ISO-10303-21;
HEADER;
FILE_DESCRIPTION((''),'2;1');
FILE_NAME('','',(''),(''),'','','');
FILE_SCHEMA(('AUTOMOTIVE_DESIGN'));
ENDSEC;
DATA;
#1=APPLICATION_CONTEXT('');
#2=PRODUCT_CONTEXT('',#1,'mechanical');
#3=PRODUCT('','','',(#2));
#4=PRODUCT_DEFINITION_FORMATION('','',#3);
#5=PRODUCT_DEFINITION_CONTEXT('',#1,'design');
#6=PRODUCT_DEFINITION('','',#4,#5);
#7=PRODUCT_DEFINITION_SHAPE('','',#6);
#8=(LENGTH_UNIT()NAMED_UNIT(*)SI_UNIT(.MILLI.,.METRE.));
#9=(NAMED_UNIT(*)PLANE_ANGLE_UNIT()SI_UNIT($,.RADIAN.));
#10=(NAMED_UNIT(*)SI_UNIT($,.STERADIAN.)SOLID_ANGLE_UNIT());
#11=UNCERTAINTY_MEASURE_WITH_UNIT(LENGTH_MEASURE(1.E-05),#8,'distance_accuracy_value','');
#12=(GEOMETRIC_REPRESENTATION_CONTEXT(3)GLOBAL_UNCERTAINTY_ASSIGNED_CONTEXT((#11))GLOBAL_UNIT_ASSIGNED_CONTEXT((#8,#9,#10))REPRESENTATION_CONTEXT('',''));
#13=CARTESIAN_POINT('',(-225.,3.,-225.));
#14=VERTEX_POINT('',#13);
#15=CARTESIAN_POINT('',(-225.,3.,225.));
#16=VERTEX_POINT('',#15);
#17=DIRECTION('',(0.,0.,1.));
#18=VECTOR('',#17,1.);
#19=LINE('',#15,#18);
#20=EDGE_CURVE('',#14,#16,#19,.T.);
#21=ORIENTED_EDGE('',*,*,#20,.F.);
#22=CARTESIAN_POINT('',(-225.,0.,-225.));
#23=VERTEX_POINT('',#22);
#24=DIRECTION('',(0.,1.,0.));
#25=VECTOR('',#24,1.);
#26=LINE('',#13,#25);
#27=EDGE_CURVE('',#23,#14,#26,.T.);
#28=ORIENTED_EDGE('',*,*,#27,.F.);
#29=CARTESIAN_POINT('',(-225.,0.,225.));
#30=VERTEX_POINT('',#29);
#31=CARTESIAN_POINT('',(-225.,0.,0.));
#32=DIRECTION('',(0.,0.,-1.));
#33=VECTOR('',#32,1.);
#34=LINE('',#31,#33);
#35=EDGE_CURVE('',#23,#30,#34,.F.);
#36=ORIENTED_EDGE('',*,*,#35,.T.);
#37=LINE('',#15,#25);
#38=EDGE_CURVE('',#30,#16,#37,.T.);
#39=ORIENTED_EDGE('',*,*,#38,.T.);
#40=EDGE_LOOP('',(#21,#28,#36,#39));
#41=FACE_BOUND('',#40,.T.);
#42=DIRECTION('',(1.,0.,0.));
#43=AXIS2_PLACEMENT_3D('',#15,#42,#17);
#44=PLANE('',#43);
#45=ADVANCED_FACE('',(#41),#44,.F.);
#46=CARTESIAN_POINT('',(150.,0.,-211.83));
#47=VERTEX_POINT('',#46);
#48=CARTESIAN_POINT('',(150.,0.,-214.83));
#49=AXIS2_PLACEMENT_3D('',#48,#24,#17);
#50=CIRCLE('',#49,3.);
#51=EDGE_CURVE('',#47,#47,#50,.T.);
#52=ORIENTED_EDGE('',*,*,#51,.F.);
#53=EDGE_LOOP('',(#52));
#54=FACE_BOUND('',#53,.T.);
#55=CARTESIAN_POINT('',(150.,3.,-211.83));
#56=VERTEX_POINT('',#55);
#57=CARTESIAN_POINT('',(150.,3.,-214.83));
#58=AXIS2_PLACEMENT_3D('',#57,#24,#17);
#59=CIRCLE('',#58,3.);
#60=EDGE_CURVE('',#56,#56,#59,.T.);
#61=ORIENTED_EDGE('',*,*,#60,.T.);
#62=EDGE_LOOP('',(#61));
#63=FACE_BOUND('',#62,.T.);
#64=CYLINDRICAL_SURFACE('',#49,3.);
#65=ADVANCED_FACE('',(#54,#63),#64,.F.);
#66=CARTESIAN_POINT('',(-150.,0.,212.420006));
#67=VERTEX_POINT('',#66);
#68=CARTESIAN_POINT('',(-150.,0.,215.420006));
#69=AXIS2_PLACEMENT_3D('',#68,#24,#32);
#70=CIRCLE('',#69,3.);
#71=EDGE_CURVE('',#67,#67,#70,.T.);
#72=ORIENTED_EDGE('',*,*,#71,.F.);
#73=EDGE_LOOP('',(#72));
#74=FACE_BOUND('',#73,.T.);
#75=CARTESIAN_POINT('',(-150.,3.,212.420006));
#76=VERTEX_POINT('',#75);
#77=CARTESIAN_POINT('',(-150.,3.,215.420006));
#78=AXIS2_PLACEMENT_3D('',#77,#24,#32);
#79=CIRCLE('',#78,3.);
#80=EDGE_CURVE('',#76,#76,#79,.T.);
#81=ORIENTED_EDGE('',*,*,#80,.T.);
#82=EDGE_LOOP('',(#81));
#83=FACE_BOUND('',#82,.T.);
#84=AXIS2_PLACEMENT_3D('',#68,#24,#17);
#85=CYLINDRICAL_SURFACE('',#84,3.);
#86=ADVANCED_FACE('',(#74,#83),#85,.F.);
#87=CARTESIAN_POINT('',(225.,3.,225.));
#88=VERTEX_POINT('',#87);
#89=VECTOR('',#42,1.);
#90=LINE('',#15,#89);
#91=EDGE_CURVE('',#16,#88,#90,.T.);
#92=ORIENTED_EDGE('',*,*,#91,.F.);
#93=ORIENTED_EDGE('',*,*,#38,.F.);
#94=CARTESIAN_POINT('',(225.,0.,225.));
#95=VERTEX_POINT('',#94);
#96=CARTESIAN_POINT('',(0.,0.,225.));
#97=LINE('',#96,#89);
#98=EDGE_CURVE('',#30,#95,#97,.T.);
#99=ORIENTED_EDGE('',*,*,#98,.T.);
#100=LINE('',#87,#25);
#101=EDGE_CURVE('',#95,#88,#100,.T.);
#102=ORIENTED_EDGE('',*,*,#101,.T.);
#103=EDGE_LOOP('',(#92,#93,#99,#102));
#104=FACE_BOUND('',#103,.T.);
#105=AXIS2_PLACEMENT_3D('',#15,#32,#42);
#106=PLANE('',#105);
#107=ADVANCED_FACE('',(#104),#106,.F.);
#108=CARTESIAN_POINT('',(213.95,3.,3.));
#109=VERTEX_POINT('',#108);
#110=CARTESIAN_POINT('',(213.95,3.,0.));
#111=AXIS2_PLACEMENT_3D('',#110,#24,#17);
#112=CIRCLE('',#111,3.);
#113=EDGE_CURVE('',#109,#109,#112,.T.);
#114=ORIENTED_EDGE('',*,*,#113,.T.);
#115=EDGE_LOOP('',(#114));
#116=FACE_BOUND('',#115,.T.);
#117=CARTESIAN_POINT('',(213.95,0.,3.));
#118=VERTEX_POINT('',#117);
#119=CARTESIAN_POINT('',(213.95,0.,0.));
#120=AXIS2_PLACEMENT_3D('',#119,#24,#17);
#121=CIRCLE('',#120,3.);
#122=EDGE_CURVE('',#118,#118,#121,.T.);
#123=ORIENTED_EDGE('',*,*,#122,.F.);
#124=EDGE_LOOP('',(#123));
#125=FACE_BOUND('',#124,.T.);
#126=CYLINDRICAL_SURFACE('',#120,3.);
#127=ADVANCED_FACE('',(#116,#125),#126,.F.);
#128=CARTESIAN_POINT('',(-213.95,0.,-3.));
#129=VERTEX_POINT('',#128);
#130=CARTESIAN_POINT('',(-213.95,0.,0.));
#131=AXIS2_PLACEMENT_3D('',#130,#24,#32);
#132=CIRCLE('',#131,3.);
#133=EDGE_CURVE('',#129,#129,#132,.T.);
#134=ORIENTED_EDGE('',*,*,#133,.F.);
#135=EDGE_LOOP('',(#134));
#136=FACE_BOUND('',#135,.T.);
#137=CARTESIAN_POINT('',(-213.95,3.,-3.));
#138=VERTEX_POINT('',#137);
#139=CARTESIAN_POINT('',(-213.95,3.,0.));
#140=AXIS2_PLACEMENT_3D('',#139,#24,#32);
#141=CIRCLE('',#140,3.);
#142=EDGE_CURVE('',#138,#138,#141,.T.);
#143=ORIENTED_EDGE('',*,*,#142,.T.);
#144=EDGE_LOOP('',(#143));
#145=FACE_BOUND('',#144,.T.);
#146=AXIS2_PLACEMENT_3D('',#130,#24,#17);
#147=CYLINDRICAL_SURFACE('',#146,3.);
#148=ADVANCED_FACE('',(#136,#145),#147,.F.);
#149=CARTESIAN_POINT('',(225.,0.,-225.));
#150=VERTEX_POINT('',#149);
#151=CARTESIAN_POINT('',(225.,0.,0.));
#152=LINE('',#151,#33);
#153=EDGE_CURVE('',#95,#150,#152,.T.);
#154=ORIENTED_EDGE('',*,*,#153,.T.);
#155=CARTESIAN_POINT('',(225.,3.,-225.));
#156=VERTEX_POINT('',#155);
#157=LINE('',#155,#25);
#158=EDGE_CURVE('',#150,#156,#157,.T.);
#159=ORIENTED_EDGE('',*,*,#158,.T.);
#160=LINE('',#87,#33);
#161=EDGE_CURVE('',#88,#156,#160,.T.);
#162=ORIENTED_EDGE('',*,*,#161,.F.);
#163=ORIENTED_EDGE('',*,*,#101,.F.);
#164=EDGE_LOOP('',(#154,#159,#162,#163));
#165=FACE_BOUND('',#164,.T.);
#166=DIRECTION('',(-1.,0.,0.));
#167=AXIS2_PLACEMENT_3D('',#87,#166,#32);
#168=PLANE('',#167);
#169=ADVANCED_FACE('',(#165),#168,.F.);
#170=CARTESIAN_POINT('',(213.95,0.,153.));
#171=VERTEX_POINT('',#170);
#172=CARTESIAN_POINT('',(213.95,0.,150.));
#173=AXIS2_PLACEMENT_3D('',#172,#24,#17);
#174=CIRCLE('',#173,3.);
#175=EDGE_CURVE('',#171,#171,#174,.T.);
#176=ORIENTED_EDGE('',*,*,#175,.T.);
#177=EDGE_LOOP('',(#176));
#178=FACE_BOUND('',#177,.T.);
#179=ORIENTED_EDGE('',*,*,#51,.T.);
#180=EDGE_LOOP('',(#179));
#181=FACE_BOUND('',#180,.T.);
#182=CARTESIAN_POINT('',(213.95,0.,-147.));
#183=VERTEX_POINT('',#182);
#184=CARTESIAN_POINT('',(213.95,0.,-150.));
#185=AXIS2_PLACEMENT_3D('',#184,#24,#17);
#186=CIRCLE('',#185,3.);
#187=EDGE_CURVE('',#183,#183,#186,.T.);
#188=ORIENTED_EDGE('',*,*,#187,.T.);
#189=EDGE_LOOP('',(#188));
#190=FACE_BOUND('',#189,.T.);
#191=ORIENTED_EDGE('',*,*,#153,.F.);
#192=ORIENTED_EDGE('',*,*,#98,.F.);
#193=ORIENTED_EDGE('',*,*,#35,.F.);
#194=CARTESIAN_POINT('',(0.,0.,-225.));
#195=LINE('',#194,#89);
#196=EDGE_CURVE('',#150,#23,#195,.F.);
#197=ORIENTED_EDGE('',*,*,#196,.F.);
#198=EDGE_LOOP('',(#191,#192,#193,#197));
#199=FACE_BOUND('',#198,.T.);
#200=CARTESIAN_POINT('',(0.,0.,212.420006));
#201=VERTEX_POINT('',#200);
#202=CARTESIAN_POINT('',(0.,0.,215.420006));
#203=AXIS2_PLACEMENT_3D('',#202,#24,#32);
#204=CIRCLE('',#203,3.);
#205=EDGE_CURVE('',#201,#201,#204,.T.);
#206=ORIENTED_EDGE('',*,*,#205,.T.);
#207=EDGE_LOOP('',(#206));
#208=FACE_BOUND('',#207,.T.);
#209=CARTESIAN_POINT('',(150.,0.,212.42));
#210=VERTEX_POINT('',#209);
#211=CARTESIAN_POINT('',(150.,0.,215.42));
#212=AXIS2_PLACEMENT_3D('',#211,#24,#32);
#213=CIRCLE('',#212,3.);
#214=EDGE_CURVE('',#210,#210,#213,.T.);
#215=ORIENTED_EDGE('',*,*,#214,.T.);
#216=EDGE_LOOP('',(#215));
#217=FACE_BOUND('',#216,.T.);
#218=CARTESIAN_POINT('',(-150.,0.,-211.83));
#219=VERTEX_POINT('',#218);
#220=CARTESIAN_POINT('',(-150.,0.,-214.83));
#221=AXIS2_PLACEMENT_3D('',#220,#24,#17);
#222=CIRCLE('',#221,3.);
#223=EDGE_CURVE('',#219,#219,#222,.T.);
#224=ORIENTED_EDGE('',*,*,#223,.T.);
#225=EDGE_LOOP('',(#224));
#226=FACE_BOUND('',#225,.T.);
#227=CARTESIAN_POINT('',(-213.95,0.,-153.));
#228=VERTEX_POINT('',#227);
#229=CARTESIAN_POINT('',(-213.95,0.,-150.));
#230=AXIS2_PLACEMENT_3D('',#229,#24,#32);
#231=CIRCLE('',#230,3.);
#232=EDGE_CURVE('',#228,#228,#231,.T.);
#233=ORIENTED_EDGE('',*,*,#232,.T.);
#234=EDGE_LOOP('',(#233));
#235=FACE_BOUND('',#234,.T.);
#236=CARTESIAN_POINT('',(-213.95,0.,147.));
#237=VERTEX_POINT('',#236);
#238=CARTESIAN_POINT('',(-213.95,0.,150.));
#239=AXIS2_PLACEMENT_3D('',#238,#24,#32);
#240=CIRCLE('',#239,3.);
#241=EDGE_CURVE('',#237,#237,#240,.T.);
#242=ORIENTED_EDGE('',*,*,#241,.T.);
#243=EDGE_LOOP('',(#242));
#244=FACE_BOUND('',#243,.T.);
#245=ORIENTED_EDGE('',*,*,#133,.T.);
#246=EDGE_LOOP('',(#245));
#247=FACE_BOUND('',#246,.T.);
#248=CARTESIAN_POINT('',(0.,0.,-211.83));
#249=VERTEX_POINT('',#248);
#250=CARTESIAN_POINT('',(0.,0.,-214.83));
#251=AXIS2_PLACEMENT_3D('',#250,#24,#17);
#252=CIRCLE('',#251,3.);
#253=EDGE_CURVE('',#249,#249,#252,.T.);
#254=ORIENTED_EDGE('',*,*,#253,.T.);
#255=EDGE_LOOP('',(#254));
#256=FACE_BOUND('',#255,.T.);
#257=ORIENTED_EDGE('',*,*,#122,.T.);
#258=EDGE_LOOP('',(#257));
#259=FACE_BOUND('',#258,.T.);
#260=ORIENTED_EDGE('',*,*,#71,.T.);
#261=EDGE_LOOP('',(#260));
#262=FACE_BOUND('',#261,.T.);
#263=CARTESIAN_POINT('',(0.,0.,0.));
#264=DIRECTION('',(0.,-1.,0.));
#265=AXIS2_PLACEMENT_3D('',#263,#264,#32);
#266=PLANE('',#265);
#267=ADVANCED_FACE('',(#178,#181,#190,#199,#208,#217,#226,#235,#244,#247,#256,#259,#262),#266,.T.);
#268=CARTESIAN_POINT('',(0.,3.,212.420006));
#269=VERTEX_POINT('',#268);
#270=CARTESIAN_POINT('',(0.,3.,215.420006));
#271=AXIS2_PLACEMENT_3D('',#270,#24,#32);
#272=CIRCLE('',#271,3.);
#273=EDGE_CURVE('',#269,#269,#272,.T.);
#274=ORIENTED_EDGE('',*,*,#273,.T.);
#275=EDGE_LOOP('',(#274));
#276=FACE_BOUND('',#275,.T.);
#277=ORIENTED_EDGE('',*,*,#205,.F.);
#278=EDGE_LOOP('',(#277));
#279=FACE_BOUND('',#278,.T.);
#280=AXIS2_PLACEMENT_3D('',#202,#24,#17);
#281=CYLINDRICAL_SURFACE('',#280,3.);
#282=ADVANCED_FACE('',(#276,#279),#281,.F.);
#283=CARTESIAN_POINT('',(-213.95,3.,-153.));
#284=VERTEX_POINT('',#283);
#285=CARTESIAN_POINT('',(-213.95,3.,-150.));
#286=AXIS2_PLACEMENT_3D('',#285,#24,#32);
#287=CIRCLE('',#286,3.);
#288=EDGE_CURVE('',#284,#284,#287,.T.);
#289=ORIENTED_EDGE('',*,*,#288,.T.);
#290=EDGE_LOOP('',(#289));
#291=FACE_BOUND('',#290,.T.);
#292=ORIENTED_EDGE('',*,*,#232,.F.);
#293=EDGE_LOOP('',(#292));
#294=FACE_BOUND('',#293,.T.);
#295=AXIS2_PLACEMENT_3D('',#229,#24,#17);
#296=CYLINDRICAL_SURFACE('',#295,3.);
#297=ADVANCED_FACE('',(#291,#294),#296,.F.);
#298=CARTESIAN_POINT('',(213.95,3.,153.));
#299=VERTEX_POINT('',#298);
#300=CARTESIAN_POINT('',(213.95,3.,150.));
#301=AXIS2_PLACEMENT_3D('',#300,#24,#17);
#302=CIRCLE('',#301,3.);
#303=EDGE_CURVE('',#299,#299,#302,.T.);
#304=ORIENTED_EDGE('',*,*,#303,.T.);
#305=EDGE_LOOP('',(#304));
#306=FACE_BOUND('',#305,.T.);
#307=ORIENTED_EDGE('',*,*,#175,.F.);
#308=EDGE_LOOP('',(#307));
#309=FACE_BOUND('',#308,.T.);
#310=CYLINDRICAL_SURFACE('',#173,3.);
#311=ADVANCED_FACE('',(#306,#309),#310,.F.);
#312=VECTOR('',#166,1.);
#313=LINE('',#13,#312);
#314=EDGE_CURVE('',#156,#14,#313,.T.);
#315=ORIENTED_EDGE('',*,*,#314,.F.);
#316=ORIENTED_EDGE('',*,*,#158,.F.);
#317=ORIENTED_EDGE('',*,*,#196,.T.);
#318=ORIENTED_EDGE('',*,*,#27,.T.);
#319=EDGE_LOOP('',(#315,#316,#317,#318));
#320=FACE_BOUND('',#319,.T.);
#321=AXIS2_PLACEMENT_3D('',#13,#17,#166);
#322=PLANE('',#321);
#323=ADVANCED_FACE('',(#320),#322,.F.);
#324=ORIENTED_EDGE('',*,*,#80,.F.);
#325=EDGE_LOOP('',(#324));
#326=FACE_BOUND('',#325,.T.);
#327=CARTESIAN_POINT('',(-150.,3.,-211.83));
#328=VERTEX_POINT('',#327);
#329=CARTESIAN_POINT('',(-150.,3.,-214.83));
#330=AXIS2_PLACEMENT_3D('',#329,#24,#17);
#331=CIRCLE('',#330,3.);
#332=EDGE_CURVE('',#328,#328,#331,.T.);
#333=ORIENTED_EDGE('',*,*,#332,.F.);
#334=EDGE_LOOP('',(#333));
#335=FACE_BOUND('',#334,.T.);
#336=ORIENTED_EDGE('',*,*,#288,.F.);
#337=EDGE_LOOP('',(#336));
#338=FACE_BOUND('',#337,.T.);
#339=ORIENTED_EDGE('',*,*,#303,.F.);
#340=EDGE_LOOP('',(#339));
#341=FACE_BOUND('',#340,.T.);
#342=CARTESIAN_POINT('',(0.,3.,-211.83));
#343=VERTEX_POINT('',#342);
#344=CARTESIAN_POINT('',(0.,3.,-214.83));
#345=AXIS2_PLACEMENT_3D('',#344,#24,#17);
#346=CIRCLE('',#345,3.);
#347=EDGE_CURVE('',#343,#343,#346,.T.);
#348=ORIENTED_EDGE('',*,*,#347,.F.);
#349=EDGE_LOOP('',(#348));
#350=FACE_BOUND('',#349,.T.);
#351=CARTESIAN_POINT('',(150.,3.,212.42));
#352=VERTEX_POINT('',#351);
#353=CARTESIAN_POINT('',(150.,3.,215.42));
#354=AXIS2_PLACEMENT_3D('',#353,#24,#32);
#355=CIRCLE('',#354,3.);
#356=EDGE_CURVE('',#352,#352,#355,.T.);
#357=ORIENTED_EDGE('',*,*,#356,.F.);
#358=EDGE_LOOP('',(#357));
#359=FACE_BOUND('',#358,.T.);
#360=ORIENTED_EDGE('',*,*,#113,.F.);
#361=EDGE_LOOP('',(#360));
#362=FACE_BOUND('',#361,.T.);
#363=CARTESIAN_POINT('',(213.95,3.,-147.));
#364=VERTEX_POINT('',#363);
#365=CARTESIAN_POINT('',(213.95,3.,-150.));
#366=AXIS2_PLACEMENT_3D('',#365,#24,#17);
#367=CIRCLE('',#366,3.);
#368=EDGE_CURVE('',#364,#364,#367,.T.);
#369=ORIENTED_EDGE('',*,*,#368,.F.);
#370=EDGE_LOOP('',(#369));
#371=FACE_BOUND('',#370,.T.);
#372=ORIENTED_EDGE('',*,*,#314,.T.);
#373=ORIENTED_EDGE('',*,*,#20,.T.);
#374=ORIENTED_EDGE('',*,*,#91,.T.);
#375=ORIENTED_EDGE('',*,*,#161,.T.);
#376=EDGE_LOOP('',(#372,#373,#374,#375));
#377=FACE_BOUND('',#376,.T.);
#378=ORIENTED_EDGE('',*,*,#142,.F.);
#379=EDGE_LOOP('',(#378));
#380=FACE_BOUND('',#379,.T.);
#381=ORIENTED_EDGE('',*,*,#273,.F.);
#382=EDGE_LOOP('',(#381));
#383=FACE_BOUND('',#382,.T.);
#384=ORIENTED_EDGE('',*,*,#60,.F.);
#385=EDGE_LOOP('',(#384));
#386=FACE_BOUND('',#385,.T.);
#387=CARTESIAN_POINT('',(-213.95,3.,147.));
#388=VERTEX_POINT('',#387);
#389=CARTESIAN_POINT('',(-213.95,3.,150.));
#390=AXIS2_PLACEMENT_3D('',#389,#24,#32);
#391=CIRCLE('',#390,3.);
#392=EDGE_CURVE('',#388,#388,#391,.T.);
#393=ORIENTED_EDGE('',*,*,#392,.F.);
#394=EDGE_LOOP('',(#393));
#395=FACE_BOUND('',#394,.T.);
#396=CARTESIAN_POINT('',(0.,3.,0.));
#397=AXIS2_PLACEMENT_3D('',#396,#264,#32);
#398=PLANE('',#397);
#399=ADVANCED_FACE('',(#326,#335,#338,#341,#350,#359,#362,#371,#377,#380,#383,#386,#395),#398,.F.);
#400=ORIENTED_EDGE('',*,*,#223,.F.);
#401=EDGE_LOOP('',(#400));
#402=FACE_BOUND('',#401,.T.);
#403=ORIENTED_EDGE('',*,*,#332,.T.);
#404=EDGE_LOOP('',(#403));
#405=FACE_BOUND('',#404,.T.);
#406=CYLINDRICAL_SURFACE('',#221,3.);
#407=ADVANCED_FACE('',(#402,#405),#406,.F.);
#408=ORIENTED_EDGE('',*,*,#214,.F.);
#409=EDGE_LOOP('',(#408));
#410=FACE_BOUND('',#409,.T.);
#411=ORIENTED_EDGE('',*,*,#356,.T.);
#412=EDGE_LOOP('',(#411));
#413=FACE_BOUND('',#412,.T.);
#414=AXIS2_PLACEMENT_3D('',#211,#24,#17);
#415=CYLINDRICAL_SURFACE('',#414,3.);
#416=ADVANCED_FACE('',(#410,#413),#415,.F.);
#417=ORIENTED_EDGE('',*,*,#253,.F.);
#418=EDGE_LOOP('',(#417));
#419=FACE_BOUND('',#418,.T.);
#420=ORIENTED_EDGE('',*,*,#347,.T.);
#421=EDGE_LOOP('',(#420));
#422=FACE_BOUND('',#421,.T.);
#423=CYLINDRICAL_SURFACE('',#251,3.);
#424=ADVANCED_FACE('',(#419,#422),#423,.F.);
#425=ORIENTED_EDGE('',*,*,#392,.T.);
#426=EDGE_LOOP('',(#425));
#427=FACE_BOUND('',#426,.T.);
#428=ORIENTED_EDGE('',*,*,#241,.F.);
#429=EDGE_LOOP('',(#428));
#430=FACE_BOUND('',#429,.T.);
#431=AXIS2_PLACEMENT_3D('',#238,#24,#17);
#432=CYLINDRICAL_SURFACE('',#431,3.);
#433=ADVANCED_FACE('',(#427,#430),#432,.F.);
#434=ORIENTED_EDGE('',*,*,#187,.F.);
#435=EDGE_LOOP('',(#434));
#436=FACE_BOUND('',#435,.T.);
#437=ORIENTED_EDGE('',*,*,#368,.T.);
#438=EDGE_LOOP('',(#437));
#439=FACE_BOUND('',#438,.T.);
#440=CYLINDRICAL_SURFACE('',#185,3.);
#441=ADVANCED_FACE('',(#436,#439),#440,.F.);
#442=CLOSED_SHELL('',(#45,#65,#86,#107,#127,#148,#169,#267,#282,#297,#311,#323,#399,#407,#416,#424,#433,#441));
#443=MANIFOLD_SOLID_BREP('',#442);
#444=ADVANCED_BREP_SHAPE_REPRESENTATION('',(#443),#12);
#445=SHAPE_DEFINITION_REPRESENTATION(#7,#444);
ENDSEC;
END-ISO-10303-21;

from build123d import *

# Parameters (mm, degrees)
SKETCH1_W           = 450
SKETCH1_H           = 450
BOSS_EXTRUDE1_DEPTH = 3
SKETCH6_R           = 3
CUT_EXTRUDE1_DEPTH  = 3


with BuildPart() as part:
    # Sketch1 → Boss-Extrude1 (new body)
    with BuildSketch(Plane(origin=(0, 0, 0), x_dir=(1, 0, 0), z_dir=(0, 1, 0))):
        Rectangle(SKETCH1_W, SKETCH1_H)
    extrude(amount=BOSS_EXTRUDE1_DEPTH)

    # Sketch6 → Cut-Extrude1 (cut)
    with BuildSketch(Plane(origin=(0, 3, 0), x_dir=(1, 0, 0), z_dir=(0, 1, 0))):
        with Locations(Location((-150, 214.83, 0), (0, 0, 270))):
            Circle(SKETCH6_R)
        with Locations(Location((0, 214.83, 0), (0, 0, 270))):
            Circle(SKETCH6_R)
        with Locations(Location((150, 214.83, 0), (0, 0, 270))):
            Circle(SKETCH6_R)
        with Locations(Location((150, -215.42, 0), (0, 0, 90))):
            Circle(SKETCH6_R)
        with Locations(Location((0, -215.420006429, 0), (0, 0, 90))):
            Circle(SKETCH6_R)
        with Locations(Location((-150, -215.420006429, 0), (0, 0, 90))):
            Circle(SKETCH6_R)
        with Locations(Location((213.95, 150, 0), (0, 0, 270))):
            Circle(SKETCH6_R)
        with Locations(Location((213.949999998, 0, 0), (0, 0, 270))):
            Circle(SKETCH6_R)
        with Locations(Location((213.949999998, -150, 0), (0, 0, 270))):
            Circle(SKETCH6_R)
        with Locations(Location((-213.949999802, -150, 0), (0, 0, 90))):
            Circle(SKETCH6_R)
        with Locations(Location((-213.949999604, 0, 0), (0, 0, 90))):
            Circle(SKETCH6_R)
        with Locations(Location((-213.95, 150, 0), (0, 0, 90))):
            Circle(SKETCH6_R)
    extrude(amount=-CUT_EXTRUDE1_DEPTH, mode=Mode.SUBTRACT)


solid = part.part
